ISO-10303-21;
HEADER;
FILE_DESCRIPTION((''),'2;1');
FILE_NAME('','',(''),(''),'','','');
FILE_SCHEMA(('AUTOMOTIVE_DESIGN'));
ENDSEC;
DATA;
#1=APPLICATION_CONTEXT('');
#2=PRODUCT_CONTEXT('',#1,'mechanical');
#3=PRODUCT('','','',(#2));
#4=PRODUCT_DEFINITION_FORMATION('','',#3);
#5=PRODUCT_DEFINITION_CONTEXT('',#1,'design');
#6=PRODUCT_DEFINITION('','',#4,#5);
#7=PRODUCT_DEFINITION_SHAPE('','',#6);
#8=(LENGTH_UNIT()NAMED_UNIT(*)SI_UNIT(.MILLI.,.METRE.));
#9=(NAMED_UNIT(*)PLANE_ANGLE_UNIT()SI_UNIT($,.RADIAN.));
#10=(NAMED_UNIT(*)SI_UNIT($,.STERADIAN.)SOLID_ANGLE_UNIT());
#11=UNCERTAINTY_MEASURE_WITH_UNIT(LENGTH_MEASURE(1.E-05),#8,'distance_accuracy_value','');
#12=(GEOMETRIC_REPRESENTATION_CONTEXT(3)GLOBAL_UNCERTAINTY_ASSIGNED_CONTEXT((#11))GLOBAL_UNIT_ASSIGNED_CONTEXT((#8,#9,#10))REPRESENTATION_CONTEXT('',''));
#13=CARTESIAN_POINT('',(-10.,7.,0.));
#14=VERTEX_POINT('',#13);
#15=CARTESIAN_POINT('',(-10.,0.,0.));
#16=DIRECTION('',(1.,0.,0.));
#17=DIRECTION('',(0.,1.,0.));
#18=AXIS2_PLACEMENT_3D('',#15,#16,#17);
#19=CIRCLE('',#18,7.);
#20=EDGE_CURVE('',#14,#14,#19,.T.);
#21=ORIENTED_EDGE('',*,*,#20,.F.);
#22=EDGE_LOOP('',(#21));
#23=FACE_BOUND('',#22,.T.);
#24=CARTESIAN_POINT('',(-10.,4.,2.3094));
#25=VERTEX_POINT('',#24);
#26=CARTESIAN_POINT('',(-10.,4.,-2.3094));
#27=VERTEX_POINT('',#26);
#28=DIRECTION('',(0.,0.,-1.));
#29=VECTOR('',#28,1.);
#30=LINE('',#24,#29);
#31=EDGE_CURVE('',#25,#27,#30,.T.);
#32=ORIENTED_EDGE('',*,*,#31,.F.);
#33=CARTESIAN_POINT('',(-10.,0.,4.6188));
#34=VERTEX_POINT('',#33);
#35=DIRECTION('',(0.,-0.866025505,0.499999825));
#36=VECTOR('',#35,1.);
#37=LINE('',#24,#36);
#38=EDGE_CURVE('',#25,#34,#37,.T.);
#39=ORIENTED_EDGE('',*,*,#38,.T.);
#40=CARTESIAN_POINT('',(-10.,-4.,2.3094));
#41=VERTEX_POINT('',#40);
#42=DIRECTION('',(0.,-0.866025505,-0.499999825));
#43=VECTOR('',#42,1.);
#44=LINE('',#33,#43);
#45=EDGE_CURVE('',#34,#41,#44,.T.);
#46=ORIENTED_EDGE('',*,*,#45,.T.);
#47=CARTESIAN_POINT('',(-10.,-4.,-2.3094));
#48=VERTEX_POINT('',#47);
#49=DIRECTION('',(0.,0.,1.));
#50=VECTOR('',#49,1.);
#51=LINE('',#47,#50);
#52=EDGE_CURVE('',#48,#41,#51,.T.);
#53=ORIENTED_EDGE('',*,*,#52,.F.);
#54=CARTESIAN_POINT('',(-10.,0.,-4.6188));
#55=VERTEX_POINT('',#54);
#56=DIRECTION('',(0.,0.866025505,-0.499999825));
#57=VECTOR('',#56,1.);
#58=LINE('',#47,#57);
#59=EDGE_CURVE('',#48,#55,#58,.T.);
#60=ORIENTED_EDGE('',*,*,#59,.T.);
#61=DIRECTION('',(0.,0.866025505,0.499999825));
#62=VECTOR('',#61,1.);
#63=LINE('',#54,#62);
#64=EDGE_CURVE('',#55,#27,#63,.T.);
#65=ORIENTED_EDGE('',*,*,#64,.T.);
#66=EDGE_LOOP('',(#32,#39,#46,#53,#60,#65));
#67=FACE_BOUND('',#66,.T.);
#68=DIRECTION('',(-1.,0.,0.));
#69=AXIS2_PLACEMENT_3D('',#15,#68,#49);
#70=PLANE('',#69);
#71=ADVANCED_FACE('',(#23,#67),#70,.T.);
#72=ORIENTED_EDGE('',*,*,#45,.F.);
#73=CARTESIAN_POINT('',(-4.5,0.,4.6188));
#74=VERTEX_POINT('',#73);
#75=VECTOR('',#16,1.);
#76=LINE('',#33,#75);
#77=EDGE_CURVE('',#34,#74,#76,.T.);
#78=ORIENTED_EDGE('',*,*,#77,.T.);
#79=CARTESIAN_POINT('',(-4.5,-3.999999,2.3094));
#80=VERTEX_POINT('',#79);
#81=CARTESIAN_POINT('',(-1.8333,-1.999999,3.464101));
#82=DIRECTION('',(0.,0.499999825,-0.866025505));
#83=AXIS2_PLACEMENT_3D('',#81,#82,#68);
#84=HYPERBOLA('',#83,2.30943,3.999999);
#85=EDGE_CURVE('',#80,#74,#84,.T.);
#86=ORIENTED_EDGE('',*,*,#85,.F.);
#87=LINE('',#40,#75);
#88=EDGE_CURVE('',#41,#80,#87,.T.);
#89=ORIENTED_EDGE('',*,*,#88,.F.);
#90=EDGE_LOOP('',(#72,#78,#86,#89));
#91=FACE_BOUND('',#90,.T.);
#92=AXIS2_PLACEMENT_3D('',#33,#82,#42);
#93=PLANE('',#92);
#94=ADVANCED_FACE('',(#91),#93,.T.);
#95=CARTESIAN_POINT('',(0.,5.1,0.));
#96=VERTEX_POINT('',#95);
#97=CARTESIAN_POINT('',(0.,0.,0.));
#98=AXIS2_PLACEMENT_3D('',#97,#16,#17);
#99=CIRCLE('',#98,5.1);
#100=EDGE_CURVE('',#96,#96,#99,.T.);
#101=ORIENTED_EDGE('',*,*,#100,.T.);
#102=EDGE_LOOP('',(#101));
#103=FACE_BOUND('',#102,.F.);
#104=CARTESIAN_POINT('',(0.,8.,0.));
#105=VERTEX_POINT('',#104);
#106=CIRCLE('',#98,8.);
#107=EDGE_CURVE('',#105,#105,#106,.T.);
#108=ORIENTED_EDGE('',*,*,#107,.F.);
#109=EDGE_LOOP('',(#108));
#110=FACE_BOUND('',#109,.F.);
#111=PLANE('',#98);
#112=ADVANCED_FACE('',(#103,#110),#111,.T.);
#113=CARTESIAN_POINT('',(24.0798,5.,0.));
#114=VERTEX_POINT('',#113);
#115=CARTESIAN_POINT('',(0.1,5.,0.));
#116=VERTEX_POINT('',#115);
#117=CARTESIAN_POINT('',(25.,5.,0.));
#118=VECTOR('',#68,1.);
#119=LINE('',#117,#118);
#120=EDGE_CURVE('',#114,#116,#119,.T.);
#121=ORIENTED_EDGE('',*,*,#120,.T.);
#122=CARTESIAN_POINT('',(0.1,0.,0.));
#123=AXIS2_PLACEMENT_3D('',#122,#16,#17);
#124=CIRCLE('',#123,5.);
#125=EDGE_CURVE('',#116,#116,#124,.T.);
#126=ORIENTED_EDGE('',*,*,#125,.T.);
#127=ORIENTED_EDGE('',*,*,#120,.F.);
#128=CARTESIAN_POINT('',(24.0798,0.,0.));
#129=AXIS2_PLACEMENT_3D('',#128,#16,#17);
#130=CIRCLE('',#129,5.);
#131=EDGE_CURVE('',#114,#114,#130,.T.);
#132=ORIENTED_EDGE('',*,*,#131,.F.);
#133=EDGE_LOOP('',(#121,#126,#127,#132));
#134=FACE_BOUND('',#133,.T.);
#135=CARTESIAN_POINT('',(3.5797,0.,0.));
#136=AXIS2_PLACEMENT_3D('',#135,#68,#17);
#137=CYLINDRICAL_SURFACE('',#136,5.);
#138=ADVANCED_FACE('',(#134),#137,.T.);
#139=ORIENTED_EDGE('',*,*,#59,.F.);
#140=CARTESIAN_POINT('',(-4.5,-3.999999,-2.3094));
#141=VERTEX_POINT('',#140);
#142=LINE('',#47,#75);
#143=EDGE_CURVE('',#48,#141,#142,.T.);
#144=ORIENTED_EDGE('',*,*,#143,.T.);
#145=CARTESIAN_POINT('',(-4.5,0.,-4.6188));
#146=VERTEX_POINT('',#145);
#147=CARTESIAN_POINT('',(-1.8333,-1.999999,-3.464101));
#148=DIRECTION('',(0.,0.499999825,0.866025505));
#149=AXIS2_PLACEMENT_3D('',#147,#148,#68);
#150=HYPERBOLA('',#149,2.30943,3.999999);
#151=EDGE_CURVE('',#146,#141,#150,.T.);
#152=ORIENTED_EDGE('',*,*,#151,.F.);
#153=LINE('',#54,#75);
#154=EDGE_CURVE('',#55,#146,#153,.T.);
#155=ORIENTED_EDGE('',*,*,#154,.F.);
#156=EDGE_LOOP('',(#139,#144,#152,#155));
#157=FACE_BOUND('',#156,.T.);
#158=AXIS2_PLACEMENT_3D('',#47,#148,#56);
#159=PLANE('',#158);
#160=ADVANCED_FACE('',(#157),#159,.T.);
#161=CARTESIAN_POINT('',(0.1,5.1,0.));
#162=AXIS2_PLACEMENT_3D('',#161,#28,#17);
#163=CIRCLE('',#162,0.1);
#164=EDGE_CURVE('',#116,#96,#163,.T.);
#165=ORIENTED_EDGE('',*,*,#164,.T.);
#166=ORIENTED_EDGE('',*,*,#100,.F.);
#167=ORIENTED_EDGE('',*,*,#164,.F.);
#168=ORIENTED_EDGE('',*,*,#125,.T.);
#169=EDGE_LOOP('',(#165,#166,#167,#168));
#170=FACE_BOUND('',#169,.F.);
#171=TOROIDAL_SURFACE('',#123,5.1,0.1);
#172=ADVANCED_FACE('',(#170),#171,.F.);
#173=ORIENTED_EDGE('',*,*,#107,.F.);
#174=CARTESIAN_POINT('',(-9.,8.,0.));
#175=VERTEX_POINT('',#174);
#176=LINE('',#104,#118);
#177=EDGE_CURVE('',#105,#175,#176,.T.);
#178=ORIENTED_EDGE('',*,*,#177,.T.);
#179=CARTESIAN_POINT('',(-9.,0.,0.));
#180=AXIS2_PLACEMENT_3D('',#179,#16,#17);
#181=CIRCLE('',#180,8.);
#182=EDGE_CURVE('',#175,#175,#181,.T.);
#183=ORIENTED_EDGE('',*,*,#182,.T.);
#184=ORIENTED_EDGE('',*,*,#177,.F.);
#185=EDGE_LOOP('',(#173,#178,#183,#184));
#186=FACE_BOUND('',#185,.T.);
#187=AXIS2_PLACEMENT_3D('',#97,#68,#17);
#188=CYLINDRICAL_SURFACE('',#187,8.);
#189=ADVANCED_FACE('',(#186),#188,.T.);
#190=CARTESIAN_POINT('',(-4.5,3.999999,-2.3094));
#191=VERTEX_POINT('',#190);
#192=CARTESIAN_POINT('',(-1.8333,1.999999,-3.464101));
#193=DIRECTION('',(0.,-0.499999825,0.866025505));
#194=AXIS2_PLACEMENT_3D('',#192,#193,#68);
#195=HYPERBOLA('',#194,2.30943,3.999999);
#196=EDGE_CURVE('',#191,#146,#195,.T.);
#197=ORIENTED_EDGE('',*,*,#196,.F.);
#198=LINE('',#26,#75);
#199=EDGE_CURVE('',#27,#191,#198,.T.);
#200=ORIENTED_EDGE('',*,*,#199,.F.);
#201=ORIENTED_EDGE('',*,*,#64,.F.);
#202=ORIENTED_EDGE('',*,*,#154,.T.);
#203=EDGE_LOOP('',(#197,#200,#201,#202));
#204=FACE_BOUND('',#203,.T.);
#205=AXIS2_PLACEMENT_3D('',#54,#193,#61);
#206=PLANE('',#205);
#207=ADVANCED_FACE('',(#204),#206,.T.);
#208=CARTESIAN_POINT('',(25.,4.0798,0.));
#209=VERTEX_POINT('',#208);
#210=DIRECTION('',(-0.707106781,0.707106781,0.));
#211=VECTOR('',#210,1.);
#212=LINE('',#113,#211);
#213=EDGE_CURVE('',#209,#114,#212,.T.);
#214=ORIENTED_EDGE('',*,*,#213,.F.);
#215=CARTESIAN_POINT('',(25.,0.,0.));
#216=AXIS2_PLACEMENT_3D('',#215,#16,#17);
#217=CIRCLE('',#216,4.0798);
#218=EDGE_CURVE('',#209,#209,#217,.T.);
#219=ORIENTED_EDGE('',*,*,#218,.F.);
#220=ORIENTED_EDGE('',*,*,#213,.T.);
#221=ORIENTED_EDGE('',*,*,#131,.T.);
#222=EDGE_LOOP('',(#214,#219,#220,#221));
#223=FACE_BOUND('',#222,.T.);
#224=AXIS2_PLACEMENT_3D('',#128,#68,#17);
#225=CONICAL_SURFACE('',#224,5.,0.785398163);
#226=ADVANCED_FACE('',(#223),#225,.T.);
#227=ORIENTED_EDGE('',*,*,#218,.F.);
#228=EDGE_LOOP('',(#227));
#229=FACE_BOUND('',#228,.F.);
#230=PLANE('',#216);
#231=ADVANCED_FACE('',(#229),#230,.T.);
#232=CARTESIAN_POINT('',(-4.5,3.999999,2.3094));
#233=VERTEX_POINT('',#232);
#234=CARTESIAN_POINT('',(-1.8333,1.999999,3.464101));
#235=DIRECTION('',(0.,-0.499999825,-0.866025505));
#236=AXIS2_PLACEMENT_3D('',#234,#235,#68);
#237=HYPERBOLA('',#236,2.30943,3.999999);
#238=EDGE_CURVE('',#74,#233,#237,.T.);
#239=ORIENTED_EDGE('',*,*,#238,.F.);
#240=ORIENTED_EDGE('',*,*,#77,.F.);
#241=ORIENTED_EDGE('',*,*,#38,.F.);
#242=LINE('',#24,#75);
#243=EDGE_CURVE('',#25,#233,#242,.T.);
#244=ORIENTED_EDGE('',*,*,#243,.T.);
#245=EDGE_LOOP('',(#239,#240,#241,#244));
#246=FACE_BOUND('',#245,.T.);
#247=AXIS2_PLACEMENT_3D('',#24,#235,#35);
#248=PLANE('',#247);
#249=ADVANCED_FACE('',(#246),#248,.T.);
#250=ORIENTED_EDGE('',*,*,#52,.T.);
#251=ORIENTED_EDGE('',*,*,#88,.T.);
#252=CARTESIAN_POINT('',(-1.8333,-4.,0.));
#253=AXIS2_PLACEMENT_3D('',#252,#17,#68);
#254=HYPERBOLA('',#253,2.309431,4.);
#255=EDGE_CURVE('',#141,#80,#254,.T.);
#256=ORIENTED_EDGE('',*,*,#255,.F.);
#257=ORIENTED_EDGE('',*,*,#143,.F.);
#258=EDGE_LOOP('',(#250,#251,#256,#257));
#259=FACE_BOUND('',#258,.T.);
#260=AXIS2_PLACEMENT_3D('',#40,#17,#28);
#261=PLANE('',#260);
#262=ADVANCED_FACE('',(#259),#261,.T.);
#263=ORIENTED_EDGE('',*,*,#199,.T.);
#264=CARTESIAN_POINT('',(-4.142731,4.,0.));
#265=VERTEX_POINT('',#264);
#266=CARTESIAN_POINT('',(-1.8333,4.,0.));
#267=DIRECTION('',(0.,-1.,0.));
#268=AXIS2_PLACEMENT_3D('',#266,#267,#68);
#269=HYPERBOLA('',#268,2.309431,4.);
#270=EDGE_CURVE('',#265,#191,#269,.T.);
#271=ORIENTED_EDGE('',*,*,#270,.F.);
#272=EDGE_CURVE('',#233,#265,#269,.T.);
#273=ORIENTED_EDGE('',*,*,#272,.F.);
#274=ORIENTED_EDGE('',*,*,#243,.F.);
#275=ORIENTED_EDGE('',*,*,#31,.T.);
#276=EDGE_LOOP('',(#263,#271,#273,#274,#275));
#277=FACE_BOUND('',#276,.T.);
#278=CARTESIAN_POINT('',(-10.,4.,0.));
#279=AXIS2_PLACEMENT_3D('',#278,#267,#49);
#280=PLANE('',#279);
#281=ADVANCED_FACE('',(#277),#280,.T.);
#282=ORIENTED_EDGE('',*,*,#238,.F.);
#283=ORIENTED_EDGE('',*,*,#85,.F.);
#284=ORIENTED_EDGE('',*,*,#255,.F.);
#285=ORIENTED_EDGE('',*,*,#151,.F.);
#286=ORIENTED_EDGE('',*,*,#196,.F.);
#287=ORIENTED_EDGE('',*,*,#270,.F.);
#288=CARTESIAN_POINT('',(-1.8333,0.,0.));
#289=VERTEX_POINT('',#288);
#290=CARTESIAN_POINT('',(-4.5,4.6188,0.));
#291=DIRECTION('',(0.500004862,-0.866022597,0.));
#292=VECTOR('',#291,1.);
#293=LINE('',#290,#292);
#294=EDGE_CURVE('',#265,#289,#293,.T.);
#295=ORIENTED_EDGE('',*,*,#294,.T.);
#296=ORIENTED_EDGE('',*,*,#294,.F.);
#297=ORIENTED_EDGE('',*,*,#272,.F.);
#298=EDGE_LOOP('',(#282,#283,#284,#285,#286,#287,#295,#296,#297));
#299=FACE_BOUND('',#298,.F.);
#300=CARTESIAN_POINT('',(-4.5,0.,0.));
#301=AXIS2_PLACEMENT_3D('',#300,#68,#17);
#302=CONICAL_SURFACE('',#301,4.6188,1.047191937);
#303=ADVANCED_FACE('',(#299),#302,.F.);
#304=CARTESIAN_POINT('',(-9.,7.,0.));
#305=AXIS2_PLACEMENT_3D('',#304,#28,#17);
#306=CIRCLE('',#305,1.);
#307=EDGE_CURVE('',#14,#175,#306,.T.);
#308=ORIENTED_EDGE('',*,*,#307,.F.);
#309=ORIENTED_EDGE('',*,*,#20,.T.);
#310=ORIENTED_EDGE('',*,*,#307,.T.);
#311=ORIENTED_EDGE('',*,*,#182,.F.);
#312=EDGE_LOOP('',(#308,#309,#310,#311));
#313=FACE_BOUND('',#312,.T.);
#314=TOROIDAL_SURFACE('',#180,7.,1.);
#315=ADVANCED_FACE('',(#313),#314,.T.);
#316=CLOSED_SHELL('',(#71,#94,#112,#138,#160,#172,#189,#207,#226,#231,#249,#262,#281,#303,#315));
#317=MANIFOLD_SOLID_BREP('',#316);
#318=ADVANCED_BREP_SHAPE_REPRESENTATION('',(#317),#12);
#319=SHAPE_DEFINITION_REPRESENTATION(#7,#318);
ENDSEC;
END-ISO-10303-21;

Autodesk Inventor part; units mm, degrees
ref_plane "YZ Plane" through (0, 0, 0) normal (1, 0, 0) x (0, 1, 0)
ref_plane "XZ Plane" through (0, 0, 0) normal (0, 1, 0) x (-1, 0, 0)
sketch "Sketch1" plane through (0, 0, 0) normal (0, 0, 1) x (1, 0, 0)
  line L0 (-1.8333, 0) -> (25, 0)
  line L1 (25, 0) -> (25, 5)
  line L2 (25, 5) -> (4.5, 5)
  line L3 (4.5, 5) -> (3.5797, 5)
  line L4 (3.5797, 5) -> (0, 5)
  line L5 (0, 5) -> (0, 8)
  line L6 (0, 8) -> (-10, 8)
  line L7 (-10, 8) -> (-10, 4.6188)
  line L8 (-10, 4.6188) -> (-4.5, 4.6188)
  line L9 (-4.5, 4.6188) -> (-1.8333, 0)
  line L10 (-17, 0) -> (32, 0) projected
  line L11 (0, -1.6) -> (0, 9.6) projected
  line L12 (4.5, 5) -> (0, 5) construction
  dimension "d1" = 20.5
  dimension "d2" = 0.9203
  dimension "d3" = 10
  dimension "d4" = 5.5
  dimension "d5" = 60
  dimension "d6" = 10
  dimension "d7" = 10
  dimension "d8" = 9.2376
  dimension "d9" = 16
  dimension "d26" = 25
revolve "Body" add sketch "Sketch1" angle 360 about axis through (-1.8333, 0, 0) along (1, 0, 0)
sketch "Sketch2" plane through (-10, 0, 0) normal (-1, 0, 0) x (0, 0, 1)
  circle A0 centre (0, 0) radius 4.6188 projected
  line L0 (0, -11.2) -> (0, 11.2) projected
  line L1 (-11.2, 0) -> (11.2, 0) projected
  line L2 (4.6188, 0) -> (2.3094, -4)
  line L3 (2.3094, -4) -> (-2.3094, -4)
  line L4 (-2.3094, -4) -> (-4.6188, 0)
  line L5 (-4.6188, 0) -> (-2.3094, 4)
  line L6 (-2.3094, 4) -> (2.3094, 4)
  line L7 (2.3094, 4) -> (4.6188, 0)
extrude "Slot" add sketch "Sketch2" against normal up to next contours L7 A0 | A0 L2 | L6 L0 A0 | A0 L0 L3 | L0 L6 A0 | A0 L3 L0 | L4 A0 | A0 L5
fillet "Fillet1" radius 1 1 edges at (-10, -8, 0)
thread "Thread" size "M10x1.5" class "6g" standard "ISO Metric profile" length 20.5
chamfer "Chamfer1" distance 0.9202 distance2 0.9202 1 edges at (25, -5, 0) measured on face at (25, -0.8193, -0.3214)
ref_plane "Work Plane1" through (29, 0, 0) normal (0, -1, 0) x (1, 0, 0)
fillet "Fillet2" radius 0.1 1 edges at (0, -5, 0)
equation "\"d30\" = R"
equation "\"d17\" = RR"
equation "\"d13\" = GEL"
equation "\"d15\" = -0.5 * SPD + 0.5 * GD"
equation "\"d16\" = GUL"
equation "\"d1\" = GEL"
equation "\"d3\" = KOH"
equation "\"d4\" = INTI"
equation "\"d6\" = GD"
equation "\"d7\" = BDM"
equation "\"d8\" = 1.1547 * SW"
equation "\"d9\" = KOD"
equation "\"d26\" = NLG"
equation "\"GD\" = NND"
equation "\"NLG\" = 25"
equation "\"GEL\" = 20.5"
equation "\"KOD\" = 16"
equation "\"KOH\" = NND"
equation "\"INTI\" = 5.5"
equation "\"GAL\" = 0.61345 * PTC"
equation "\"GUL\" = 0.61345 * PTC"
equation "\"BDM\" = NND"
equation "\"SW\" = 8"
equation "\"RR\" = 1"
equation "\"SPD\" = NND - 1.2269 * PTC"
equation "\"R\" = 0.1"
equation "\"TOA\" = 30deg"
equation "\"GD1\" = THREADDIA - 1.2269 * PTC"
equation "\"FAWI\" = 45deg"
equation "\"PTC\" = 1.5"
equation "\"E0\" = 1.155 * SW"
equation "\"PHH\" = 0"
equation "\"NND\" = 10"
equation "\"THREADDIA\" = 10"
properties part number "CSN 02 1143 - M10 x 25" material "Steel, Mild"
